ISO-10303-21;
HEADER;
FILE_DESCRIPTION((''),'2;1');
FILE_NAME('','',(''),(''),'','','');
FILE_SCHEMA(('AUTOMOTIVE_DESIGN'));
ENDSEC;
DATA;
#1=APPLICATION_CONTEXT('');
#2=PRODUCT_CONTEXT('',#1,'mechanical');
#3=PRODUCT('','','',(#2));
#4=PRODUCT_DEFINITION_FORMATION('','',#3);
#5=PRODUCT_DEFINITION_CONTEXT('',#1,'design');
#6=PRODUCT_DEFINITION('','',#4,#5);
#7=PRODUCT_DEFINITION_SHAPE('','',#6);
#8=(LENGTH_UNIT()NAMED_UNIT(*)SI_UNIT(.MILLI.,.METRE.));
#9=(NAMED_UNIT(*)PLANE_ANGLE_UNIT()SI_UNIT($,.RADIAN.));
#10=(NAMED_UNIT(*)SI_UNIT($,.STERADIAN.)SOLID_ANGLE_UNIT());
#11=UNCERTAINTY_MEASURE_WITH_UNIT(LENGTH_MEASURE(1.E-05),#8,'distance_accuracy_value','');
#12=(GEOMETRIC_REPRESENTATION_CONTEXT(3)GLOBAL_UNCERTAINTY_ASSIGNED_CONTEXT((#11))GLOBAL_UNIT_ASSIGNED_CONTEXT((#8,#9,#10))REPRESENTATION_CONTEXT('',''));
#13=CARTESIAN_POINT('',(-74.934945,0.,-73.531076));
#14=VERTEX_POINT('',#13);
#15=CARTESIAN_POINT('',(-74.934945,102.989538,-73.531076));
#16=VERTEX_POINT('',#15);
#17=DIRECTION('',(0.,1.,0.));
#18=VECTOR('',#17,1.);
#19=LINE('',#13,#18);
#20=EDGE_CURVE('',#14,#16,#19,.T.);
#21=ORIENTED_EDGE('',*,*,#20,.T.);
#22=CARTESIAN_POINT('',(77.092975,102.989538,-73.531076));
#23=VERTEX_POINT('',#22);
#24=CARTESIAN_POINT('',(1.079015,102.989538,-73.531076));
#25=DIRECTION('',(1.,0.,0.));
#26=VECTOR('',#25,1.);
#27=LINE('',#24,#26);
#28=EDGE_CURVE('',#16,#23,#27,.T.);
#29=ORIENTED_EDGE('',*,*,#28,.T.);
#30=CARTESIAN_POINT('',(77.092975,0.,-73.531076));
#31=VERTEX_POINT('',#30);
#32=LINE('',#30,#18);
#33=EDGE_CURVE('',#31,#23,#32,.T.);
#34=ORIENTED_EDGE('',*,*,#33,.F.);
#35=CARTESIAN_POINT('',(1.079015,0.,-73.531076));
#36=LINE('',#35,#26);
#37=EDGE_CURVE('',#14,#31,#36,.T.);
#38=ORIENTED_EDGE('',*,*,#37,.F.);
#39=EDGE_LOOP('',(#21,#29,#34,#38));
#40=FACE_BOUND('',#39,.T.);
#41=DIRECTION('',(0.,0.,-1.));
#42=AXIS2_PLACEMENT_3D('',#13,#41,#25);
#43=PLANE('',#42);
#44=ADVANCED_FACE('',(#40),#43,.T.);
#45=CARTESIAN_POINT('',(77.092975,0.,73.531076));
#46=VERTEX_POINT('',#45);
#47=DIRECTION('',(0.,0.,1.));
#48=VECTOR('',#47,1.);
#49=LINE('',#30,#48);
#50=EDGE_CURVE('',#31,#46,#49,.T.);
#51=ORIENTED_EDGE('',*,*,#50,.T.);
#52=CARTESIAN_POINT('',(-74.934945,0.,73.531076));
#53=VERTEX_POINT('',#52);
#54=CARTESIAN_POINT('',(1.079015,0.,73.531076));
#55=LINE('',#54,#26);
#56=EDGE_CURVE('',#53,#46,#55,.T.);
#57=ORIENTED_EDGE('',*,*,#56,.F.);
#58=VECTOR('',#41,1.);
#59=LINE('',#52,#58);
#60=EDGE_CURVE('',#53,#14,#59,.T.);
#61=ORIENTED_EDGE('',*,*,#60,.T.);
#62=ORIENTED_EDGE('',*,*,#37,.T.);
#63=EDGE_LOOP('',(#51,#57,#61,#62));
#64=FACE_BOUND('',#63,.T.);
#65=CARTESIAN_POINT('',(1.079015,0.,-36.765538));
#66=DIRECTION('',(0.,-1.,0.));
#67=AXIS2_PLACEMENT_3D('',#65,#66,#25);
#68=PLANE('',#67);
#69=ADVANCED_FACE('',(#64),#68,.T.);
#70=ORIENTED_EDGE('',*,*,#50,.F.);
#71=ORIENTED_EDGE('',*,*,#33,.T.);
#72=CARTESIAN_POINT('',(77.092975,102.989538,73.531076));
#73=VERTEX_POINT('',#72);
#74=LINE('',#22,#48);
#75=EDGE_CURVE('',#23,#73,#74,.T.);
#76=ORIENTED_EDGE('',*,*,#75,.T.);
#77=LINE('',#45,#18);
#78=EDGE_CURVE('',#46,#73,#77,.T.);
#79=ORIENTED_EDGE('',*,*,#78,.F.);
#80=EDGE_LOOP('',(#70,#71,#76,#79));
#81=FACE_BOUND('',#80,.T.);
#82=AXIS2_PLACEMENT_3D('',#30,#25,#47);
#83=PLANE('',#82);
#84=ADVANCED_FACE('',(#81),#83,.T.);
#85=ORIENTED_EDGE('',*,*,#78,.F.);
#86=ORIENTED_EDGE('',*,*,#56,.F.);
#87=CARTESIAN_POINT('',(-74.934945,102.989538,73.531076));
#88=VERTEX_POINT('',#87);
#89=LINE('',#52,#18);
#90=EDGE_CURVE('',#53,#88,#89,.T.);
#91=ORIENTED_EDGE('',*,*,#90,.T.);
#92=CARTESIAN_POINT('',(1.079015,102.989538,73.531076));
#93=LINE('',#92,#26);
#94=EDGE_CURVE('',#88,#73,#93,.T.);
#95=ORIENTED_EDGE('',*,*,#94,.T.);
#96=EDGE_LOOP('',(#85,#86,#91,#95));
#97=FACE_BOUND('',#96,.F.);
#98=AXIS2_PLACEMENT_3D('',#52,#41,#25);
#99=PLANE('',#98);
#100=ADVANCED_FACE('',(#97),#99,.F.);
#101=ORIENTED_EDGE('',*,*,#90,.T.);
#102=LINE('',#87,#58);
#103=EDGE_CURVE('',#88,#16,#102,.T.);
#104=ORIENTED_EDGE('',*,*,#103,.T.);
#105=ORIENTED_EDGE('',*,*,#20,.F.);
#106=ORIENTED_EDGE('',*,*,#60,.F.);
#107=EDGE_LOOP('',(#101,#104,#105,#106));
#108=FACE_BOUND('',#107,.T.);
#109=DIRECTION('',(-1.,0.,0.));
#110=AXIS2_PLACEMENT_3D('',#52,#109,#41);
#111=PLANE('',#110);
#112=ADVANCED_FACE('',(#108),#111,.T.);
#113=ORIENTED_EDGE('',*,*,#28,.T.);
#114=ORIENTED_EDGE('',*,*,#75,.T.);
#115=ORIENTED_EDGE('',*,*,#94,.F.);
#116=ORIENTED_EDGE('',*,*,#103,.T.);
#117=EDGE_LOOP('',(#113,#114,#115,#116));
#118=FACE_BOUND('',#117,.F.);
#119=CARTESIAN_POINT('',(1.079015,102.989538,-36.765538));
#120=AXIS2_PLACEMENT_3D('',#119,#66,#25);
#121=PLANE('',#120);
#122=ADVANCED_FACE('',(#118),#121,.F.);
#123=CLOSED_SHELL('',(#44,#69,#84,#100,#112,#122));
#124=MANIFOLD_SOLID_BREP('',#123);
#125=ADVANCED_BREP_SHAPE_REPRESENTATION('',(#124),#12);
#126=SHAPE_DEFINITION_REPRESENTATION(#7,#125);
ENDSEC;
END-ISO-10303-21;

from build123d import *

# Parameters (mm, degrees)
F0_W     = 152.0279198885
F0_H     = 73.5310763121
F1_DEPTH = 102.9895376414


# Not quite as in the source:
# - a feature names something its author has since deleted; it is built from what else it names


with BuildPart() as f1:
    # F0 (on Front) → F1 (new body)
    with BuildSketch(Plane.XZ):
        with Locations((1.0790154338, -36.765538156)):
            Rectangle(F0_W, F0_H)
        with Locations((1.0790154338, 36.765538156)):
            Rectangle(F0_W, F0_H)
    extrude(amount=-F1_DEPTH)


solid = f1.part
